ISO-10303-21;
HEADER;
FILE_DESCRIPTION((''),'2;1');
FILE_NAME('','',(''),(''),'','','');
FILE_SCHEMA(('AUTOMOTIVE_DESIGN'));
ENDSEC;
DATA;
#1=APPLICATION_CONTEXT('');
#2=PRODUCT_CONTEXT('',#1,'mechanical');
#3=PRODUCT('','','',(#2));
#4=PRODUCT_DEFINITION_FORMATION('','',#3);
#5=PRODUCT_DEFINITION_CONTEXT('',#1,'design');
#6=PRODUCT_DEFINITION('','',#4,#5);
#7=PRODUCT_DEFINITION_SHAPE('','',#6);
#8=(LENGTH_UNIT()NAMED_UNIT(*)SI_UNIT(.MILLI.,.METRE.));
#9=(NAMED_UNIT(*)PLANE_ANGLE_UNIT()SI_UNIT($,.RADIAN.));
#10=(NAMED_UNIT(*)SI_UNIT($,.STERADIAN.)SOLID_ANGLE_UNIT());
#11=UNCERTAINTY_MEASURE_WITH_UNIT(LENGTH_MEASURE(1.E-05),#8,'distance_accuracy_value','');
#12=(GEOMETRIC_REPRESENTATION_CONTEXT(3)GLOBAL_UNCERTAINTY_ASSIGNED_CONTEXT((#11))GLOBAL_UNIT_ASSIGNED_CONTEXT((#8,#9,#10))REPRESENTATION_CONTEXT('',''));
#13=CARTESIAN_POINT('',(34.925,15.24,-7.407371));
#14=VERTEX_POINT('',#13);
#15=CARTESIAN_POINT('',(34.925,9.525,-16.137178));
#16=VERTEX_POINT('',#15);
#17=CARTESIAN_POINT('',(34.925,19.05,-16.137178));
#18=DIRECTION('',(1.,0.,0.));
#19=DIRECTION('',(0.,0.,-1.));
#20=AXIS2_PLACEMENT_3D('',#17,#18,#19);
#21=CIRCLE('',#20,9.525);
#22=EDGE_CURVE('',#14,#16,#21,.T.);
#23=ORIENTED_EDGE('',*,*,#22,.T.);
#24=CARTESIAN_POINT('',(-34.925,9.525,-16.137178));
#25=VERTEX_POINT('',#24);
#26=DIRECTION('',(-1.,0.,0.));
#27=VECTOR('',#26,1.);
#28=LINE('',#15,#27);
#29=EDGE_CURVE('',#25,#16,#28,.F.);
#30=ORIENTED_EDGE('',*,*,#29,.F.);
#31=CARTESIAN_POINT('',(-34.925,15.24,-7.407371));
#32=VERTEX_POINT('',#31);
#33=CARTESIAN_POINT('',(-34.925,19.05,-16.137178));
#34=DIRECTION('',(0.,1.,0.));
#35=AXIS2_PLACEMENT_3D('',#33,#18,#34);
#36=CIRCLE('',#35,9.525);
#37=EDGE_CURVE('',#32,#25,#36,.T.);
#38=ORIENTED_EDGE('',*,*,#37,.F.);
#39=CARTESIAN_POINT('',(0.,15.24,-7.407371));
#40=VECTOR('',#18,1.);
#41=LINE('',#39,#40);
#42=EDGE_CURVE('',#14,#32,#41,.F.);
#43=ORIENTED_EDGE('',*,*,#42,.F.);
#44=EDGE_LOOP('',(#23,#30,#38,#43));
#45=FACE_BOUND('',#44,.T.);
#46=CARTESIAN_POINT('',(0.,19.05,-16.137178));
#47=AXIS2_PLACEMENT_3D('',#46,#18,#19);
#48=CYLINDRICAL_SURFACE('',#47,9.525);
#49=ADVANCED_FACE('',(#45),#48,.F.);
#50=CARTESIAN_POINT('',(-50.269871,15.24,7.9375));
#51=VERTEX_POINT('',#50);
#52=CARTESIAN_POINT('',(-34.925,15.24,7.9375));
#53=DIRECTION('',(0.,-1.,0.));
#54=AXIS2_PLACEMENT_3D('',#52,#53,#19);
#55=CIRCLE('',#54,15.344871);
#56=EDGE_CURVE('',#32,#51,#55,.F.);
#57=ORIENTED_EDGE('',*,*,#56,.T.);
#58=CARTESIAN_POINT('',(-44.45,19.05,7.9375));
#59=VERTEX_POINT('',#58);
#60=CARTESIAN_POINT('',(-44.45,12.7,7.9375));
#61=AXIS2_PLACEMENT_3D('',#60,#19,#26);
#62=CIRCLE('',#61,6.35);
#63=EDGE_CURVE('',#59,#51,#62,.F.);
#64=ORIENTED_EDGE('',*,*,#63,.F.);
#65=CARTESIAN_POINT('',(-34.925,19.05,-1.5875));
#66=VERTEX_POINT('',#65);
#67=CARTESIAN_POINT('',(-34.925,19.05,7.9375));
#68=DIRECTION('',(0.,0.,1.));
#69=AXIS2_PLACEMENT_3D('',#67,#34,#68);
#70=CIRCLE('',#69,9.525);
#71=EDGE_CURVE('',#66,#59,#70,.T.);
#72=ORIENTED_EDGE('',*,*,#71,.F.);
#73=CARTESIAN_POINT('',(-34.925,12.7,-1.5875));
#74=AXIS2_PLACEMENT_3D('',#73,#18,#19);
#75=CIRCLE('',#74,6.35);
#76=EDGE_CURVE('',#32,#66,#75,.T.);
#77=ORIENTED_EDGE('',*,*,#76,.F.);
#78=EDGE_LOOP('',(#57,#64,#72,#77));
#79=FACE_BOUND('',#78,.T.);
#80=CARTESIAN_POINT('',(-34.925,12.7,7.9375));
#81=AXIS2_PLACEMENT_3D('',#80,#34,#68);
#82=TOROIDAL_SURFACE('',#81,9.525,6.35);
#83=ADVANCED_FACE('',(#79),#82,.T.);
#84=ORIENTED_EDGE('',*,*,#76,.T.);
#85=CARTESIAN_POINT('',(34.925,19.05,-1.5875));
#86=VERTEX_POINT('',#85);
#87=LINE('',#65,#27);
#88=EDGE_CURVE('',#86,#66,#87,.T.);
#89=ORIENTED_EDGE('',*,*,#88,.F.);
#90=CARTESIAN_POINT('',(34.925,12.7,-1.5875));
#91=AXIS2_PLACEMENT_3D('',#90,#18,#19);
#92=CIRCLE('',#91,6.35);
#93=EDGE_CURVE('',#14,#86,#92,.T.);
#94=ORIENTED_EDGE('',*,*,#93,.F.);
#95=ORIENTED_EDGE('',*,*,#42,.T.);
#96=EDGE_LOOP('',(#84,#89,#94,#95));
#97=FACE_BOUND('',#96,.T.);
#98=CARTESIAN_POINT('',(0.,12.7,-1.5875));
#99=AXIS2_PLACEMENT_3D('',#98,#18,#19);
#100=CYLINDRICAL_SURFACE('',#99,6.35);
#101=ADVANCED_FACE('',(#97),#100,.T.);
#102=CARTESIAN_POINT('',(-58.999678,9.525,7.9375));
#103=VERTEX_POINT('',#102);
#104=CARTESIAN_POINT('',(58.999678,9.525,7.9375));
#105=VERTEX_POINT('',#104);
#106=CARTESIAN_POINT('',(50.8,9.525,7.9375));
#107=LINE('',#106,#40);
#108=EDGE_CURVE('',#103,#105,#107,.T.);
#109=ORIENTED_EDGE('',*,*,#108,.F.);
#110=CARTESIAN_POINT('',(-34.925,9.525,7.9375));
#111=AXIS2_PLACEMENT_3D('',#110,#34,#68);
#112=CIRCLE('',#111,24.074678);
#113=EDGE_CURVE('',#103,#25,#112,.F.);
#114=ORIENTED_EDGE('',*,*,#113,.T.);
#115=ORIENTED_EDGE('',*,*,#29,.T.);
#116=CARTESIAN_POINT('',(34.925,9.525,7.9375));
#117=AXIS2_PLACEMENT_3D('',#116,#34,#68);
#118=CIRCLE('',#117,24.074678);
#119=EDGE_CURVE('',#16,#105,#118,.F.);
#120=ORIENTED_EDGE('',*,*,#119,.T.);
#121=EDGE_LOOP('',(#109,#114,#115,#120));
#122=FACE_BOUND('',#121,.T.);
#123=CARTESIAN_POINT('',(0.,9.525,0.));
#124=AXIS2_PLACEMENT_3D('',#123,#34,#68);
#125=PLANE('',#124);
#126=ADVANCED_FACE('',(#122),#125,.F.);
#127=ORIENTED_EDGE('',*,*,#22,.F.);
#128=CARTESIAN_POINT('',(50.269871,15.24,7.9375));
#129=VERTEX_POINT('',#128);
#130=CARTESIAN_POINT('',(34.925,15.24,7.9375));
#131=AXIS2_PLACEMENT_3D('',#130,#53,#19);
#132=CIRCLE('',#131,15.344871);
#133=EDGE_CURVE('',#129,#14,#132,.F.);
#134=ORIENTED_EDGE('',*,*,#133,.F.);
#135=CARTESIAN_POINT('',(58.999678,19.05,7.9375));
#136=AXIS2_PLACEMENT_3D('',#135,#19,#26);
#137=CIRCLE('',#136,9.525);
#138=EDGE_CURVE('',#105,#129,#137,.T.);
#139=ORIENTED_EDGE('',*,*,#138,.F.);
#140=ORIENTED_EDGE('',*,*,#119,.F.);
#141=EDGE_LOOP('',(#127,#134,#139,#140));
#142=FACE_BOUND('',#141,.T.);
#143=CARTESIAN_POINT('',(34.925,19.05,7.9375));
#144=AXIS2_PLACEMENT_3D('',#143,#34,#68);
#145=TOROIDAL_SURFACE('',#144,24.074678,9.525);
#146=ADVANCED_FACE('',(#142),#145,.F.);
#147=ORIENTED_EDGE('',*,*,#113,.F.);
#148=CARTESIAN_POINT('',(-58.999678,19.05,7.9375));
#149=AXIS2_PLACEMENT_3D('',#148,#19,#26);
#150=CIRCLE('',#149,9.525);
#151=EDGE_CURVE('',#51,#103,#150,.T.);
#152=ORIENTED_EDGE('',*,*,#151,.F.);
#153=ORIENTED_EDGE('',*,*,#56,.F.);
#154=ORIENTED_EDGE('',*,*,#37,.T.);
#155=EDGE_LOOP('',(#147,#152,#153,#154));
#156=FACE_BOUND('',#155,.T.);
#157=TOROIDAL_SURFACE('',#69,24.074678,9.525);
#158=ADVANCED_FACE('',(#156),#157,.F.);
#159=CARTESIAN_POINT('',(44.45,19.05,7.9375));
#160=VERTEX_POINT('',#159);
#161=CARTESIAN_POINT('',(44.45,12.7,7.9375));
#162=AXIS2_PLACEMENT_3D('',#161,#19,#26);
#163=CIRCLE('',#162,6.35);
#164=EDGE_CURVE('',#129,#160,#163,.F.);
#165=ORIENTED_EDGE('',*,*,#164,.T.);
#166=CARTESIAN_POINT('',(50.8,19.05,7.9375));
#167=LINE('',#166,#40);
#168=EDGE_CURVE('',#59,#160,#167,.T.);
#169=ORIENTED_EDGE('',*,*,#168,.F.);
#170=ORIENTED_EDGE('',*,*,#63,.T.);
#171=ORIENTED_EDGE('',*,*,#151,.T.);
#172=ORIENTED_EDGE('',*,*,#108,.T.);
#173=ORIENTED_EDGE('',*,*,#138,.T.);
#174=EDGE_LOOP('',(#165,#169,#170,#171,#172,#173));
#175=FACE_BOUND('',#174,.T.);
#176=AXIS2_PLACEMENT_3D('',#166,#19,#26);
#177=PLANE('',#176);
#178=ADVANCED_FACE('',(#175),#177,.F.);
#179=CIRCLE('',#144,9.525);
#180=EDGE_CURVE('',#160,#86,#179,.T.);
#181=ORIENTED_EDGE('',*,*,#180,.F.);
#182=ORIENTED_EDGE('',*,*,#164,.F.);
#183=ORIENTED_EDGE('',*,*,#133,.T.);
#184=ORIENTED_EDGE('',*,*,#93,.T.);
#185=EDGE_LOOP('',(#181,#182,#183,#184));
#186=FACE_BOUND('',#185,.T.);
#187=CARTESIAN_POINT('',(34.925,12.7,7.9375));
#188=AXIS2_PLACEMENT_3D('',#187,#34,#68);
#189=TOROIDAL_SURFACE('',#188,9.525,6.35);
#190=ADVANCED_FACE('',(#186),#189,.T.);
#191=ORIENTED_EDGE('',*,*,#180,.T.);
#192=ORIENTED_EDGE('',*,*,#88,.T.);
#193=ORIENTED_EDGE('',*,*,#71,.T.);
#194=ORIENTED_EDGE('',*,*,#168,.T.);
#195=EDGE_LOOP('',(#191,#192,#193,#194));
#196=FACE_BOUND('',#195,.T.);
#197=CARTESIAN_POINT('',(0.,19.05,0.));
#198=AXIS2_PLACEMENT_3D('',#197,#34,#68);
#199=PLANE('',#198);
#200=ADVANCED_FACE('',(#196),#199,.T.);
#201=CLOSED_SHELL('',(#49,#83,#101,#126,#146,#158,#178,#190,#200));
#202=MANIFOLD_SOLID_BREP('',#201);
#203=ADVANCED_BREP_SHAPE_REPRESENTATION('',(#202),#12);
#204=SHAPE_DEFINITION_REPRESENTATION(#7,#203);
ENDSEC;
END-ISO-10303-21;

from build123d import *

# Parameters (mm, degrees)
SKETCH1_W           = 152.4
SKETCH1_H           = 50.8
BOSS_EXTRUDE1_DEPTH = 9.525
SKETCH2_W           = 101.6
SKETCH2_H           = 15.875
BOSS_EXTRUDE2_DEPTH = 9.525
FILLET1_R           = 15.875
FILLET2_R           = 6.35
FILLET3_R           = 9.525
SKETCH3_W           = 152.4
SKETCH3_H           = 50.8
CUT_EXTRUDE1_DEPTH  = 81.88464395


# Some blends are built 0.0001 mm under size
with BuildPart() as part:
    # Sketch1 → Boss-Extrude1 (new body)
    with BuildSketch(Plane(origin=(0, 0, 0), x_dir=(1, 0, 0), z_dir=(0, 1, 0))):
        Rectangle(SKETCH1_W, SKETCH1_H)
    extrude(amount=BOSS_EXTRUDE1_DEPTH)

    # Sketch2 → Boss-Extrude2 (add)
    with BuildSketch(Plane(origin=(0, 9.525, 0), x_dir=(1, 0, 0), z_dir=(0, 1, 0))):
        Rectangle(SKETCH2_W, SKETCH2_H)
    extrude(amount=BOSS_EXTRUDE2_DEPTH)

    # Fillet1
    fillet1_edges = [part.edges().sort_by_distance(p)[0] for p in [
        (-50.8, 14.2875, -7.9375),
        (50.8, 14.2875, -7.9375),
    ]]
    fillet(fillet1_edges, radius=FILLET1_R - 0.0001)  # a hair under: the kernel refuses the full size

    # Fillet2
    fillet2_edges = [part.edges().sort_by_distance(p)[0] for p in [
        (0, 19.05, -7.9375),
        (46.150349441, 19.05, -3.287849441),
        (-46.150349441, 19.05, -3.287849441),
    ]]
    fillet(fillet2_edges, radius=FILLET2_R)

    # Fillet3
    # the kernel refuses this fillet: 9.525 mm, written as the material it adds along each edge
    with BuildSketch(Plane(origin=(-34.9251, 9.525, 7.9374), x_dir=(-1, 0, 0), z_dir=(0, 0, 1))) as fillet3_piece_1:
        with BuildLine():
            CenterArc((24.074577831, -9.525), FILLET3_R, 90, 66.421821522)
            Line((24.074577831, 0), (24.074577831, 0.9525))
            Line((24.074577831, 0.9525), (15.8749, 0.9525))
            Line((15.8749, 0.9525), (14.9224, 0))
            ThreePointArc((14.9224, 0), (14.9224, -3.175), (14.471790463, -5.334))
            Line((14.471790463, -5.334), (15.344771133, -5.715))
        make_face()
    revolve(axis=Axis((-34.9251, 9.525, 7.9374), (0, -1, 0)), revolution_arc=90)
    with BuildSketch(Plane(origin=(34.9251, 9.525, 7.9374), x_dir=(0, 0, -1), z_dir=(-1, 0, 0))) as fillet3_piece_2:
        with BuildLine():
            CenterArc((24.074577831, -9.525), FILLET3_R, 90, 66.421821522)
            Line((15.344771133, -5.715), (14.471790463, -5.334))
            ThreePointArc((14.471790463, -5.334), (14.9224, -3.175), (14.9224, 0))
            Line((14.9224, 0), (15.8749, 0.9525))
            Line((15.8749, 0.9525), (24.074577831, 0.9525))
            Line((24.074577831, 0.9525), (24.074577831, 0))
        make_face()
    revolve(axis=Axis((34.9251, 9.525, 7.9374), (0, -1, 0)), revolution_arc=90)
    with BuildSketch(Plane(origin=(-34.9251, 9.525, -7.9375), x_dir=(0, 0, -1), z_dir=(1, 0, 0))) as fillet3_piece_3:
        with BuildLine():
            CenterArc((8.199677831, 9.525), FILLET3_R, 203.578178478, 66.421821522)
            Line((-0.530128867, 5.715), (-1.403109537, 5.334))
            ThreePointArc((-1.403109537, 5.334), (-0.9525, 3.175), (-0.9525, 0))
            Line((-0.9525, 0), (0, -0.9525))
            Line((0, -0.9525), (8.199677831, -0.9525))
            Line((8.199677831, -0.9525), (8.199677831, 0))
        make_face()
    extrude(amount=69.8502)
    with BuildSketch(Plane(origin=(50.8, 9.525, 7.9374), x_dir=(1, 0, 0), z_dir=(0, 0, 1))) as fillet3_piece_4:
        with BuildLine():
            CenterArc((8.199677831, 9.525), FILLET3_R, 203.578178478, 66.421821522)
            Line((-0.530128867, 5.715), (-1.403109537, 5.334))
            ThreePointArc((-1.403109537, 5.334), (-0.9525, 3.175), (-0.9525, 0))
            Line((-0.9525, 0), (0, -0.9525))
            Line((0, -0.9525), (8.199677831, -0.9525))
            Line((8.199677831, -0.9525), (8.199677831, 0))
        make_face()
    extrude(amount=0.0001)
    with BuildSketch(Plane(origin=(-50.8, 9.525, 7.9375), x_dir=(0.09236442858628247, 0.9957252695055647, 0), z_dir=(0, 0, -1))) as fillet3_piece_5:
        with BuildLine():
            CenterArc((8.726924635, -9.044397601), FILLET3_R, 108.27853287, 66.421821522)
            Line((-0.757358557, -8.164626419), (-1.705786877, -8.0766493))
            Line((-1.705786877, -8.0766493), (-0.948428319, 0.087977118))
            Line((-0.948428319, 0.087977118), (0.087977118, 0.948428319))
            ThreePointArc((0.087977118, 0.948428319), (3.249404849, 0.655171258), (5.440795998, 0.90443976))
            Line((5.440795998, 0.90443976), (5.739534965, 0))
        make_face()
    extrude(amount=0.0001)

    # Sketch3 → Cut-Extrude1 (cut, through all)
    with BuildSketch(Plane(origin=(0, 9.525, 0), x_dir=(1, 0, 0), z_dir=(0, 1, 0))):
        Rectangle(SKETCH3_W, SKETCH3_H)
    extrude(amount=-CUT_EXTRUDE1_DEPTH, mode=Mode.SUBTRACT)


solid = part.part
